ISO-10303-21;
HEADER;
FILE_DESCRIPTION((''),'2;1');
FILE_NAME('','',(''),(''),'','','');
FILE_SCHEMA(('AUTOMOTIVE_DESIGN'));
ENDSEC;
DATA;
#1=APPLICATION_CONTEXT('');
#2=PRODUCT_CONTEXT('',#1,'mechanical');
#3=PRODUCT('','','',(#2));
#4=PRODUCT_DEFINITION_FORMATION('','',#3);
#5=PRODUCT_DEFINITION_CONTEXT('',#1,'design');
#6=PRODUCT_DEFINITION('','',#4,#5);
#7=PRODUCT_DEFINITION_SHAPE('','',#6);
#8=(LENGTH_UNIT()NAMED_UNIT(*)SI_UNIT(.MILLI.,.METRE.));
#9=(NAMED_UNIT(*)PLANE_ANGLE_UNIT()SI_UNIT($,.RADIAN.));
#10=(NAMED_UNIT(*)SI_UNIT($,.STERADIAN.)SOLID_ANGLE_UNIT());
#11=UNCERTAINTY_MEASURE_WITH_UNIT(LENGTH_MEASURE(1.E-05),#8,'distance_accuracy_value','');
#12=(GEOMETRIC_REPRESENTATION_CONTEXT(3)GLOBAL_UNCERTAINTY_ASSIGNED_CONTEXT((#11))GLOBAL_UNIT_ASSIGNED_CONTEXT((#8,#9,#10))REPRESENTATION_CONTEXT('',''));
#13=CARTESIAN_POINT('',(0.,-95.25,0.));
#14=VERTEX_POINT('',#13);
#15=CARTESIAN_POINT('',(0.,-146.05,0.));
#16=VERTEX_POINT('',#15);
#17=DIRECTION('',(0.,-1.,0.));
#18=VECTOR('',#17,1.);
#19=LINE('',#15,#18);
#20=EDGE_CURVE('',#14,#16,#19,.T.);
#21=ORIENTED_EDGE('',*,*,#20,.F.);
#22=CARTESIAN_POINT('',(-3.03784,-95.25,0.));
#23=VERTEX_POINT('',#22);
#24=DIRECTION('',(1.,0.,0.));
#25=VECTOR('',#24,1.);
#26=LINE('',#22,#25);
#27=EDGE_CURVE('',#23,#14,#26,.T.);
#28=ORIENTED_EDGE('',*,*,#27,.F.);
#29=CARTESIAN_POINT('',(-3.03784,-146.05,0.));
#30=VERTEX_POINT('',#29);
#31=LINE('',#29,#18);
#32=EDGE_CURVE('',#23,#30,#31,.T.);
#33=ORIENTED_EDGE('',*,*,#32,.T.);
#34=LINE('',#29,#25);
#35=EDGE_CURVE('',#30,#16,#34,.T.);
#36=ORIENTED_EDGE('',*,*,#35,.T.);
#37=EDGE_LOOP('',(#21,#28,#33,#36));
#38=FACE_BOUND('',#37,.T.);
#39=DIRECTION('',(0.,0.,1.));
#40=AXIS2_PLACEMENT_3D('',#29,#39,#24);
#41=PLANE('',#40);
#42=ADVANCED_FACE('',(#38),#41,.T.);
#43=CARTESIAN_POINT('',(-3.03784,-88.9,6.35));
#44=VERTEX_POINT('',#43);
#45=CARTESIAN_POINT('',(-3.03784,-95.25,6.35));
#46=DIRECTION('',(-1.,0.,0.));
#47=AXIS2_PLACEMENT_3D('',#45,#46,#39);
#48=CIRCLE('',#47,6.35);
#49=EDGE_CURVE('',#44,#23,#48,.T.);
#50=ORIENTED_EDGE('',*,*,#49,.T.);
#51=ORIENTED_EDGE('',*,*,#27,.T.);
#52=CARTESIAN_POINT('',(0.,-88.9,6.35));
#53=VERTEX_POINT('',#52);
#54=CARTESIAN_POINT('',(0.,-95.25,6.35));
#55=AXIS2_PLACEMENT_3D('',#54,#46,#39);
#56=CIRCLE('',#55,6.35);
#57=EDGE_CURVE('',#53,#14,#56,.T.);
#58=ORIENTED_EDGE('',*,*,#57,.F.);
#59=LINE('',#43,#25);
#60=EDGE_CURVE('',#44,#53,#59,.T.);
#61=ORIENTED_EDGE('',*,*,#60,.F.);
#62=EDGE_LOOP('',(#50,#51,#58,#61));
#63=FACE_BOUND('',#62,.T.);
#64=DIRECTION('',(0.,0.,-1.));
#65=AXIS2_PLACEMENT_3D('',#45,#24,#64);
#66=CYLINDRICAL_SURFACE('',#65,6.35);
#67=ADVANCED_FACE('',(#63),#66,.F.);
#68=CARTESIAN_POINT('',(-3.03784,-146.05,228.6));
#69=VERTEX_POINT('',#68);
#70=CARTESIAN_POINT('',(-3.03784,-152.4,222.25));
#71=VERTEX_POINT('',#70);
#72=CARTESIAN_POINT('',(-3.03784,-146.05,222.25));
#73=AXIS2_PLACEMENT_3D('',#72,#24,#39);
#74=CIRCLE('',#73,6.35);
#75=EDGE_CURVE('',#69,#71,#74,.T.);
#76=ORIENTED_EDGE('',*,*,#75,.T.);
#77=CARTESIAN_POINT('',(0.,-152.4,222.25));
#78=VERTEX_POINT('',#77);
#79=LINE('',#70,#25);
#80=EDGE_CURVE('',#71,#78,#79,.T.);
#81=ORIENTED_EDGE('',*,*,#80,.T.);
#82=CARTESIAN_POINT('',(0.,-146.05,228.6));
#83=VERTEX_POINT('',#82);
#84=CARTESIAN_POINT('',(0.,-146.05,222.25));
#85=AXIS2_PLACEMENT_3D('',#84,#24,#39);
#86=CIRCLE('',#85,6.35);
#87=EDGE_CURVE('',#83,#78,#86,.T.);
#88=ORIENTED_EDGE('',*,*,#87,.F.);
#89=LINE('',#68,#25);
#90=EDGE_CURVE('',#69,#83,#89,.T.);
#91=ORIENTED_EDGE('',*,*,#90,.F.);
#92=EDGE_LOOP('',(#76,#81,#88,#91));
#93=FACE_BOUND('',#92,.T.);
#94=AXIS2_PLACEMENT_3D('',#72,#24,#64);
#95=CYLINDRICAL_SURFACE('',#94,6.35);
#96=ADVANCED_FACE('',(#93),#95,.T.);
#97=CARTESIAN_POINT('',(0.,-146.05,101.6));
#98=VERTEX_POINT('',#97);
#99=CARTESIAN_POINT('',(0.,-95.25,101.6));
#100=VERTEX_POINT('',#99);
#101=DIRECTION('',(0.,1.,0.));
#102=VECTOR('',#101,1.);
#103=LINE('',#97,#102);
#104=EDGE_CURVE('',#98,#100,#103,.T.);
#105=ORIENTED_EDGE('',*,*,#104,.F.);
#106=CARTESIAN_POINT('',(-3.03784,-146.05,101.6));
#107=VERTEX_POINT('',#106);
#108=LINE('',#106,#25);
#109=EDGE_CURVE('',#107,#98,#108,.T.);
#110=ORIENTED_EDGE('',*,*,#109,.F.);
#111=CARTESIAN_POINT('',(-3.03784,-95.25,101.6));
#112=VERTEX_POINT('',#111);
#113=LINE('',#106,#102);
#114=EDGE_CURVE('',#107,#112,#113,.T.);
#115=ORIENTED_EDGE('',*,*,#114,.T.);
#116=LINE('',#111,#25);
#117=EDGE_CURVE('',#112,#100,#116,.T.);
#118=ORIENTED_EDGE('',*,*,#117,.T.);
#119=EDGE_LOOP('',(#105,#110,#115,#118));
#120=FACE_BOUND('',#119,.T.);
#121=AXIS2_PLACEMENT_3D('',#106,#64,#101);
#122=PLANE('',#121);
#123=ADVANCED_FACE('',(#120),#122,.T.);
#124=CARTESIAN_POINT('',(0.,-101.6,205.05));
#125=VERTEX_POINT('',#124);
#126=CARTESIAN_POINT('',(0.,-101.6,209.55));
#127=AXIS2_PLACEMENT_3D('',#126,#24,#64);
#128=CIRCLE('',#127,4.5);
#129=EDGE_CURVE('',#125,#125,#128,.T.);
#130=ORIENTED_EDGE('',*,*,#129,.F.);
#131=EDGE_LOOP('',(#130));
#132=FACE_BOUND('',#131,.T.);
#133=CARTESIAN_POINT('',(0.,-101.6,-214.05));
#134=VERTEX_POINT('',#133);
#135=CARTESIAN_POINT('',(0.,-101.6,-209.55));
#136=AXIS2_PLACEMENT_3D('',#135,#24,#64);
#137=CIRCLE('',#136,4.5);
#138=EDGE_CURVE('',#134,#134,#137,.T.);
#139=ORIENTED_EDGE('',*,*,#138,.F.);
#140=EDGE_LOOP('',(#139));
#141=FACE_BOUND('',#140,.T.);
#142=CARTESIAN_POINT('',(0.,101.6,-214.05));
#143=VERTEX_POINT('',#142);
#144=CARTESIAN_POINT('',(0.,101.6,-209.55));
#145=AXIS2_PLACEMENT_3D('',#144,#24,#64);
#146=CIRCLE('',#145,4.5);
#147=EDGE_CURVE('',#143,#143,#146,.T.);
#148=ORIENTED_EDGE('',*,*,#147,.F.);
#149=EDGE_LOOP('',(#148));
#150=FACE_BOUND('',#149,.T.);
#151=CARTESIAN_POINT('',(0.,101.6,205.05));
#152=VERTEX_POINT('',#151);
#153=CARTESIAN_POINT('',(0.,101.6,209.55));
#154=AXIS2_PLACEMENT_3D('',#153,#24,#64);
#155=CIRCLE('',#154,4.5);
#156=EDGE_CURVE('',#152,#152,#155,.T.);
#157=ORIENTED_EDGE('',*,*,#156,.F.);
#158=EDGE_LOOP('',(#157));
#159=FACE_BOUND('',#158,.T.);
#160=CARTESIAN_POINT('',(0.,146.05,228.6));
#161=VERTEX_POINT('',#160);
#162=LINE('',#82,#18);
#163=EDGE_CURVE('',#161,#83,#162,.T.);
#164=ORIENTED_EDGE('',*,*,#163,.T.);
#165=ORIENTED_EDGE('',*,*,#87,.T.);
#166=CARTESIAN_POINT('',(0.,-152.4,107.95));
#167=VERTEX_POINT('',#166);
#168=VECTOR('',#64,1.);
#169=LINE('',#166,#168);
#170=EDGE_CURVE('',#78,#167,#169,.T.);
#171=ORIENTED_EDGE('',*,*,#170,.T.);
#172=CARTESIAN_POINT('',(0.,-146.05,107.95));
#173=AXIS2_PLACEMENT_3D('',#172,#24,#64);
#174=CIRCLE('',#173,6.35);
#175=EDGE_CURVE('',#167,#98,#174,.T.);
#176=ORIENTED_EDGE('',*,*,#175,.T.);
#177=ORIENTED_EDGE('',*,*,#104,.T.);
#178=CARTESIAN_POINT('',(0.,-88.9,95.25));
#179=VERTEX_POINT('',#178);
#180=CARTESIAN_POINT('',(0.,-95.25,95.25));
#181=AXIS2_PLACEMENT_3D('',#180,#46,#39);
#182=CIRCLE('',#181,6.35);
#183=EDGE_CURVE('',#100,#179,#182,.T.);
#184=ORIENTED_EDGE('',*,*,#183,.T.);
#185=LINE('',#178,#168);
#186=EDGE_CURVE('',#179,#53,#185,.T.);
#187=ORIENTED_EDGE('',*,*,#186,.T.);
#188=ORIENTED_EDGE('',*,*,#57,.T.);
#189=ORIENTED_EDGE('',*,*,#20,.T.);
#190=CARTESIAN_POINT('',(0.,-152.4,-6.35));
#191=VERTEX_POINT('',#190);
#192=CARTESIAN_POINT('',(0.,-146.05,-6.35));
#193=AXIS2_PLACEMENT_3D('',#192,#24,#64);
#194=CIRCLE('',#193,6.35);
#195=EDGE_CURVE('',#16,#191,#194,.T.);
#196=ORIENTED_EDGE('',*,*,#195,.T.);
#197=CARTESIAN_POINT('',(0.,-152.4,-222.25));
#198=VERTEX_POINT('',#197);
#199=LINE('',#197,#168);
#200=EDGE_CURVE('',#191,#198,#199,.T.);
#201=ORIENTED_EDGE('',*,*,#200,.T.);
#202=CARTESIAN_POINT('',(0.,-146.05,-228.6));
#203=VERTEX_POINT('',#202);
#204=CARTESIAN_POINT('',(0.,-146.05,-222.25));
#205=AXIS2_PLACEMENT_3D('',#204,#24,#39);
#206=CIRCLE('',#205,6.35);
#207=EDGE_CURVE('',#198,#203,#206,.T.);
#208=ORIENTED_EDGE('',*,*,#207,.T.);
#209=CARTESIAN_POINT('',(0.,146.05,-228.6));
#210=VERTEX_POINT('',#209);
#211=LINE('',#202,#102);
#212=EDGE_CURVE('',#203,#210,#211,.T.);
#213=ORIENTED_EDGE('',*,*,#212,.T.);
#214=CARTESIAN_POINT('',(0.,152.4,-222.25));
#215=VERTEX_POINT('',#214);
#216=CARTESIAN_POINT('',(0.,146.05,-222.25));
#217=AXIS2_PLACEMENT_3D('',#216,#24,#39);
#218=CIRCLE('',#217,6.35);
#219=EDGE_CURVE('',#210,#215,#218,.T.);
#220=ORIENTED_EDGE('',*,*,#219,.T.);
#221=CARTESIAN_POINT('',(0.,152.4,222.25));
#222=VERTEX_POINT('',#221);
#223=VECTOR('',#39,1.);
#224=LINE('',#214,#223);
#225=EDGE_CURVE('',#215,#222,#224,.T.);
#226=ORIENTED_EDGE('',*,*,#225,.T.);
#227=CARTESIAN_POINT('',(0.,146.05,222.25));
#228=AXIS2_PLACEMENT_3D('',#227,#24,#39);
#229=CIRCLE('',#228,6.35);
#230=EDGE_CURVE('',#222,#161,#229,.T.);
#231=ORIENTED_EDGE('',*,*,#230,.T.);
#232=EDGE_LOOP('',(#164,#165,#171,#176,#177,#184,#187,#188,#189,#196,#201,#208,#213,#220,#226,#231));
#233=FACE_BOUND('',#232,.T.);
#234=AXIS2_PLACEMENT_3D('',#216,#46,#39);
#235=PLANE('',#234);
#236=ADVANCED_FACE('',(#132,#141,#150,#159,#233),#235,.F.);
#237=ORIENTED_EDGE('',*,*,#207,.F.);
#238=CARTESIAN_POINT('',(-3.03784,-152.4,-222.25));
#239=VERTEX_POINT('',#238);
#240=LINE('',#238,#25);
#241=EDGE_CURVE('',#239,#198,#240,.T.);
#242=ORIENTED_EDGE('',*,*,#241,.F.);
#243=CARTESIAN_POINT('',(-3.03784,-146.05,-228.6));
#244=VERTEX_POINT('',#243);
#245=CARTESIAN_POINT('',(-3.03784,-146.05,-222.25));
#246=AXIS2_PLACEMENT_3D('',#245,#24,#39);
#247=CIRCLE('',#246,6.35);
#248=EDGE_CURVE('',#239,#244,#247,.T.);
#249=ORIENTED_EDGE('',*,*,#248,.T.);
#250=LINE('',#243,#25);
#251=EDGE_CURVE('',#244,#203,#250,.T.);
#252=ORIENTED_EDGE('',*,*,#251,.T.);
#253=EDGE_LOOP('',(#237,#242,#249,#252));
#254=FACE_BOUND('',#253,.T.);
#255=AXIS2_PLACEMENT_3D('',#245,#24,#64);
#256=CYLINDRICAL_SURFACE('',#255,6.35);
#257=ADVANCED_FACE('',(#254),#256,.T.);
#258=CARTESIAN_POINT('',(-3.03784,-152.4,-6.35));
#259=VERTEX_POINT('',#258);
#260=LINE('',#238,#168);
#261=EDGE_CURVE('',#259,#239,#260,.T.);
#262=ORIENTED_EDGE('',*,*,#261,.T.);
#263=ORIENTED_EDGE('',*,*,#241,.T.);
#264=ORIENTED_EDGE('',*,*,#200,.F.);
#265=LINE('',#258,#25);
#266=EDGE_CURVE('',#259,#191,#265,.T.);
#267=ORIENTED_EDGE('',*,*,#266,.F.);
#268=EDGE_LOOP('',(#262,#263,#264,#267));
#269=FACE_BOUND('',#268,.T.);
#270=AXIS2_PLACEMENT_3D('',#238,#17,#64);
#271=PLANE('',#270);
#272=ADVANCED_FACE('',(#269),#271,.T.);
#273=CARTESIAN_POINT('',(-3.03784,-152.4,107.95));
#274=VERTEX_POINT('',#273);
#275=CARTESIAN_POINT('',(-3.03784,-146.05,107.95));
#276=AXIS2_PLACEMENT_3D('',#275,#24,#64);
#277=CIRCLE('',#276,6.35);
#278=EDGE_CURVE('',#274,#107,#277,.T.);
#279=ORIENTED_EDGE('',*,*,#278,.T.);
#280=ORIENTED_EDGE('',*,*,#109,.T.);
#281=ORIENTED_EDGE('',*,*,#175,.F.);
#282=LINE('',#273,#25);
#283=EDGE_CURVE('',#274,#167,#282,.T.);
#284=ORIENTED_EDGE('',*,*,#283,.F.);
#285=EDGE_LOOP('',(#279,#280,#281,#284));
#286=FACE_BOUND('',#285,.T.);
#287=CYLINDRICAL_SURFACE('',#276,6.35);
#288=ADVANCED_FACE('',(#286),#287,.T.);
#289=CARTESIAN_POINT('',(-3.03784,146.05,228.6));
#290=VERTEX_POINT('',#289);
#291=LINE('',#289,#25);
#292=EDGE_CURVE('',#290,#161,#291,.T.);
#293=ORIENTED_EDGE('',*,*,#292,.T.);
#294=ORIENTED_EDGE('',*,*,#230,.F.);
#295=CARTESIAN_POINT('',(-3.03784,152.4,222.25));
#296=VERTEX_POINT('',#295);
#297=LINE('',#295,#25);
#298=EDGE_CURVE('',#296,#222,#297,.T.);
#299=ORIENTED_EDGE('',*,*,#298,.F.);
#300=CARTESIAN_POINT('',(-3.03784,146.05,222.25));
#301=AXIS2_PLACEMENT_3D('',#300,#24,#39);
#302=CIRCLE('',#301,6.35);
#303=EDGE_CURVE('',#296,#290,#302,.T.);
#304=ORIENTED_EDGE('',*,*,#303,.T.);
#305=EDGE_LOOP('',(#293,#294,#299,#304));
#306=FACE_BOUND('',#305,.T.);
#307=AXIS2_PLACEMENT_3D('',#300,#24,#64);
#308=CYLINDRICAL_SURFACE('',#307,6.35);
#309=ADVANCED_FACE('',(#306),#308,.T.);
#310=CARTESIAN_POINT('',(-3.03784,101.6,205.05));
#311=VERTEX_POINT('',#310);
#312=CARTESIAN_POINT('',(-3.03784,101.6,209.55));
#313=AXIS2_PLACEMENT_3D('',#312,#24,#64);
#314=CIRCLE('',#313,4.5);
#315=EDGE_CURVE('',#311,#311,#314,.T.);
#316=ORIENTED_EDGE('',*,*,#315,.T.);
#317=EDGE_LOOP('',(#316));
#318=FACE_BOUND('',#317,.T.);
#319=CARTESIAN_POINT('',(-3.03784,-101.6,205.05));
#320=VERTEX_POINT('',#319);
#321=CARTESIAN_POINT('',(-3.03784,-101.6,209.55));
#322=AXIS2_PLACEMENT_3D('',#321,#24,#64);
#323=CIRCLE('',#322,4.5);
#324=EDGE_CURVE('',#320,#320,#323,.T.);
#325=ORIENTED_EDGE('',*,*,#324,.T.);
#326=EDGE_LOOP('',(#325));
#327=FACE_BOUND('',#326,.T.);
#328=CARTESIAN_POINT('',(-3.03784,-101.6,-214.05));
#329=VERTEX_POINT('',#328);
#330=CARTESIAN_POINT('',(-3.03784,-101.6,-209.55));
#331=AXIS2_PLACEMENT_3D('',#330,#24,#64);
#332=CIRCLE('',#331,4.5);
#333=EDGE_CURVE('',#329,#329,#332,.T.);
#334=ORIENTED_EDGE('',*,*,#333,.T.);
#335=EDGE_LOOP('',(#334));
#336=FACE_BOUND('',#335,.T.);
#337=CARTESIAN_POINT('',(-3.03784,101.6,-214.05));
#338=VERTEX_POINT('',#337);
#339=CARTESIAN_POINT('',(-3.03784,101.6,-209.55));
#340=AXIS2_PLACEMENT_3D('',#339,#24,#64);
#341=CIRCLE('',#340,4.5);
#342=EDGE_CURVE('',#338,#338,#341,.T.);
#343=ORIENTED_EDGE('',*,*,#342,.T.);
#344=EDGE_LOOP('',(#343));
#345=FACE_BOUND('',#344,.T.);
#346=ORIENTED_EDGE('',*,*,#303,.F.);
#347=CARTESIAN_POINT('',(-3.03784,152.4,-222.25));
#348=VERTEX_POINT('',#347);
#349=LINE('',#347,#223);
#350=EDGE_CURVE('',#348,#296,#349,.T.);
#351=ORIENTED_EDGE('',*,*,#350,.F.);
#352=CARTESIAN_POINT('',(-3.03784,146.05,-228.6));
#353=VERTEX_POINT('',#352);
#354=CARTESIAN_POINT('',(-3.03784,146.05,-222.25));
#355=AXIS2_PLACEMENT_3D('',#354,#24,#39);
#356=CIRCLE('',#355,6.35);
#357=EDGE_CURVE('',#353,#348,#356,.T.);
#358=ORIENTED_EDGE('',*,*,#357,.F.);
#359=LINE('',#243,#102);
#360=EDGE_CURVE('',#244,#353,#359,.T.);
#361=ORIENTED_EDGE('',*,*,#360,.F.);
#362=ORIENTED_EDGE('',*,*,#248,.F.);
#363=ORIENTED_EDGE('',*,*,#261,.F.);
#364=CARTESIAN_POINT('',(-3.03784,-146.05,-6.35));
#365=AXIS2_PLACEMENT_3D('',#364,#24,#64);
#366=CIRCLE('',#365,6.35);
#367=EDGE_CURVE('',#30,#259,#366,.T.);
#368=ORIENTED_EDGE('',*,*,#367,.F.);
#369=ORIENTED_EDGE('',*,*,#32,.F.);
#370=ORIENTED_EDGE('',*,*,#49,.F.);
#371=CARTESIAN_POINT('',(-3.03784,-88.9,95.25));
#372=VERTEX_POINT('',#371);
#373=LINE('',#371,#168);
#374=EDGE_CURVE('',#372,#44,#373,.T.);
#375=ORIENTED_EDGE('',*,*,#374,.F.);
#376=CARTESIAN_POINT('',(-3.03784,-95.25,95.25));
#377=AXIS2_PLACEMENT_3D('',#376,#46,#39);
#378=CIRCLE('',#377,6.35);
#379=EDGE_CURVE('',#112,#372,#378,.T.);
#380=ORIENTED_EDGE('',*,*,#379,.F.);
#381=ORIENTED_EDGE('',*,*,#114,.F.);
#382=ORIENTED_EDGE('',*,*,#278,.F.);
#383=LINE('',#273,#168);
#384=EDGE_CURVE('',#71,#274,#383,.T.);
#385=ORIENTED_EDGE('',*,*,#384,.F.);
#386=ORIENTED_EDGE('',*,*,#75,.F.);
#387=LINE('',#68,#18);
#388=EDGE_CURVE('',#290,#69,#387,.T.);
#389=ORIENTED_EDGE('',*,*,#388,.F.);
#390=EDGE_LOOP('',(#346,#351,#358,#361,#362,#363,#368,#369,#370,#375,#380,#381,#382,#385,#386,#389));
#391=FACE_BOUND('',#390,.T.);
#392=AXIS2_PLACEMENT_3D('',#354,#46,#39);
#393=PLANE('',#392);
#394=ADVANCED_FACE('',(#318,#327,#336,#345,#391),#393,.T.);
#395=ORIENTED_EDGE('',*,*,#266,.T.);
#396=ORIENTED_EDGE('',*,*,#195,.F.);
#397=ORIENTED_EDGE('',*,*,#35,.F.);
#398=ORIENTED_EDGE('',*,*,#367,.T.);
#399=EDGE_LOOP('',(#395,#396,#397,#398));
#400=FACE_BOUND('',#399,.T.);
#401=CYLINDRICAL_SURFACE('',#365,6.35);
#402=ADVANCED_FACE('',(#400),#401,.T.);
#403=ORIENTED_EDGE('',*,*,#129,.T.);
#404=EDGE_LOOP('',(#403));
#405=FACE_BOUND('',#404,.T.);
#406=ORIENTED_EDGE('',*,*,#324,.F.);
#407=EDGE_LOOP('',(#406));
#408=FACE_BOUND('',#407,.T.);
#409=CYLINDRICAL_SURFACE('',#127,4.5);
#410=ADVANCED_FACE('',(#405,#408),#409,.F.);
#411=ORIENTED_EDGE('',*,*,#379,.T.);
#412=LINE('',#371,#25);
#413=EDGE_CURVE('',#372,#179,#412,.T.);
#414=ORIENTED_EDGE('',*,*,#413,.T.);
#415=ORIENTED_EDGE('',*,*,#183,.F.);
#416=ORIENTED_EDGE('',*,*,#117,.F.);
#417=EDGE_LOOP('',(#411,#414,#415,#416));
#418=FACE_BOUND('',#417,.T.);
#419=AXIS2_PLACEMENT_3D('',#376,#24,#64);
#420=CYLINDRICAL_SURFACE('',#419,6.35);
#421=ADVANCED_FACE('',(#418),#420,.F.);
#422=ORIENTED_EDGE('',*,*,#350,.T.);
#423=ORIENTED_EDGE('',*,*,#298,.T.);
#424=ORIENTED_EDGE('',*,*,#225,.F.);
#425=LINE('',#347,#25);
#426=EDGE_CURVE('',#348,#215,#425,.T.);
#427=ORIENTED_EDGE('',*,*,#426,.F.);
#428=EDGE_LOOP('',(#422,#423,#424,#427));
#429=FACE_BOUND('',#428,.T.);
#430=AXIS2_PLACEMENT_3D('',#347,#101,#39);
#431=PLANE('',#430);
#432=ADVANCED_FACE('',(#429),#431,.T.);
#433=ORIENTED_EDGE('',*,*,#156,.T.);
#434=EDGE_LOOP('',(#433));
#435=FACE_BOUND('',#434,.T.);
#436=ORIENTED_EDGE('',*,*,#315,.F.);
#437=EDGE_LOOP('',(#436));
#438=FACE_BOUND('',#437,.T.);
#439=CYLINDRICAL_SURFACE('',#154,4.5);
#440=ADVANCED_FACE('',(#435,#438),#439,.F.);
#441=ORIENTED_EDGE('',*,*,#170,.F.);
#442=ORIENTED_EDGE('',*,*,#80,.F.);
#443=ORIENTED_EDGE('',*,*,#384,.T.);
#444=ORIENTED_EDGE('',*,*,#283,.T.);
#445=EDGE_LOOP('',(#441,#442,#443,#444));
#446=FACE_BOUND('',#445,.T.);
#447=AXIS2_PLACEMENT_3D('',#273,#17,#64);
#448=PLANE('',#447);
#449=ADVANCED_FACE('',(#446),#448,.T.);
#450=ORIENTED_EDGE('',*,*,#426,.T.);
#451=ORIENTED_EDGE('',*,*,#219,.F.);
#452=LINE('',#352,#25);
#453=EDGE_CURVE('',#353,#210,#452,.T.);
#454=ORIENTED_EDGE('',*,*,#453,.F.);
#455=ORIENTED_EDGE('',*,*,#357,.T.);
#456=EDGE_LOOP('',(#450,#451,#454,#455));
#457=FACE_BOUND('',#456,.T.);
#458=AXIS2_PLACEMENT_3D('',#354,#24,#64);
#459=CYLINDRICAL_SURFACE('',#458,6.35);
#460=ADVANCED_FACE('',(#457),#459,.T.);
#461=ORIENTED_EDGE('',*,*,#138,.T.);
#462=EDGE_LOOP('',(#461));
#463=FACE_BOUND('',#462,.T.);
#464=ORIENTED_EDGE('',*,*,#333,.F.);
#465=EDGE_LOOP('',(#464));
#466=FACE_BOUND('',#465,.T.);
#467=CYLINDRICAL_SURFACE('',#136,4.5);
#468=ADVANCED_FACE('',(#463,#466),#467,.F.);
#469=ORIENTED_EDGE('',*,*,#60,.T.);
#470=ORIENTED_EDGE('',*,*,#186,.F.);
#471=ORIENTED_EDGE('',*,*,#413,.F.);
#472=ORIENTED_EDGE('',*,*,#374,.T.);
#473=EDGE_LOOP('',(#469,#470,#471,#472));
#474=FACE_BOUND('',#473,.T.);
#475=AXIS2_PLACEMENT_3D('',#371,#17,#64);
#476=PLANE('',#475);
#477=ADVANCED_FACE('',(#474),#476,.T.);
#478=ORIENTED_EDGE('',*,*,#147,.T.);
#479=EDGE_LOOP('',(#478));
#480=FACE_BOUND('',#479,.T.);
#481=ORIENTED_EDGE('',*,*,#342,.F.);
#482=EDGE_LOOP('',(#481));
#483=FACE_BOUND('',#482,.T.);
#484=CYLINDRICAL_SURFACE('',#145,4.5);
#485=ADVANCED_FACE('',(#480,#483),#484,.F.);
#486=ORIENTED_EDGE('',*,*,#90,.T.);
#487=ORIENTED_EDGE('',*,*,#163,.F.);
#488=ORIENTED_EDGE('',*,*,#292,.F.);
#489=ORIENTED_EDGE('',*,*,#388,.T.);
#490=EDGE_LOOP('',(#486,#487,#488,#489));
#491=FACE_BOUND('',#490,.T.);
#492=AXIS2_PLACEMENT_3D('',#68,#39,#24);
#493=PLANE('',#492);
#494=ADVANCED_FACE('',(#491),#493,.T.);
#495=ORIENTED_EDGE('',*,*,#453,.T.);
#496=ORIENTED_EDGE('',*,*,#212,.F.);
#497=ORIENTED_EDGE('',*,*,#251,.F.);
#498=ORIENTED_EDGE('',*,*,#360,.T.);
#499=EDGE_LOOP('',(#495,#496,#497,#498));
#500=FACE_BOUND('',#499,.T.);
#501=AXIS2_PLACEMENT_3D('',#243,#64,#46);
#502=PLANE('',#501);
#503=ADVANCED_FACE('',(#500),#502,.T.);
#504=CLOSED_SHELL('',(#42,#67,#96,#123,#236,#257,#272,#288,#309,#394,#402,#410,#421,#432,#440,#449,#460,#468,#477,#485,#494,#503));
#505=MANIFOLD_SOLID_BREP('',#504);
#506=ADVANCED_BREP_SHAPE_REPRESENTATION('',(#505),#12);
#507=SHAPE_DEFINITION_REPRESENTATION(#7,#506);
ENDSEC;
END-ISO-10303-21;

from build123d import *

# Parameters (mm, degrees)
BASE_FLANGE1_DEPTH   = 3.03784
M8_CLEARANCE_HOLE1_D = 9


# Sheet-metal steps are written as plain solids
with BuildPart() as part:
    # Sketch1 → Base-Flange1 (new body)
    with BuildSketch(Plane(origin=(0, 0, 0), x_dir=(0, 0, -1), z_dir=(1, 0, 0))):
        with BuildLine():
            Line((-107.95, -152.4), (-222.25, -152.4))
            ThreePointArc((-222.25, -152.4), (-226.740128061, -150.540128061), (-228.6, -146.05))
            Line((-228.6, -146.05), (-228.6, 146.05))
            ThreePointArc((-228.6, 146.05), (-226.740128061, 150.540128061), (-222.25, 152.4))
            Line((-222.25, 152.4), (222.25, 152.4))
            ThreePointArc((222.25, 152.4), (226.740128061, 150.540128061), (228.6, 146.05))
            Line((228.6, 146.05), (228.6, -146.05))
            ThreePointArc((228.6, -146.05), (226.740128061, -150.540128061), (222.25, -152.4))
            Line((222.25, -152.4), (6.35, -152.4))
            ThreePointArc((6.35, -152.4), (1.859871939, -150.540128061), (0, -146.05))
            Line((0, -146.05), (0, -95.25))
            ThreePointArc((0, -95.25), (-1.859871939, -90.759871939), (-6.35, -88.9))
            Line((-6.35, -88.9), (-95.25, -88.9))
            ThreePointArc((-95.25, -88.9), (-99.740128061, -90.759871939), (-101.6, -95.25))
            Line((-101.6, -95.25), (-101.6, -146.05))
            ThreePointArc((-101.6, -146.05), (-103.459871939, -150.540128061), (-107.95, -152.4))
        make_face()
    extrude(amount=-BASE_FLANGE1_DEPTH)

    # M8 Clearance Hole1 (through all)
    with Locations(Plane(origin=(0, 0, 0), x_dir=(0, 0, -1), z_dir=(1, 0, 0))):
        with Locations((-209.55, 101.6), (-209.55, -101.6), (209.55, -101.6), (209.55, 101.6)):
            Hole(M8_CLEARANCE_HOLE1_D / 2)


solid = part.part
